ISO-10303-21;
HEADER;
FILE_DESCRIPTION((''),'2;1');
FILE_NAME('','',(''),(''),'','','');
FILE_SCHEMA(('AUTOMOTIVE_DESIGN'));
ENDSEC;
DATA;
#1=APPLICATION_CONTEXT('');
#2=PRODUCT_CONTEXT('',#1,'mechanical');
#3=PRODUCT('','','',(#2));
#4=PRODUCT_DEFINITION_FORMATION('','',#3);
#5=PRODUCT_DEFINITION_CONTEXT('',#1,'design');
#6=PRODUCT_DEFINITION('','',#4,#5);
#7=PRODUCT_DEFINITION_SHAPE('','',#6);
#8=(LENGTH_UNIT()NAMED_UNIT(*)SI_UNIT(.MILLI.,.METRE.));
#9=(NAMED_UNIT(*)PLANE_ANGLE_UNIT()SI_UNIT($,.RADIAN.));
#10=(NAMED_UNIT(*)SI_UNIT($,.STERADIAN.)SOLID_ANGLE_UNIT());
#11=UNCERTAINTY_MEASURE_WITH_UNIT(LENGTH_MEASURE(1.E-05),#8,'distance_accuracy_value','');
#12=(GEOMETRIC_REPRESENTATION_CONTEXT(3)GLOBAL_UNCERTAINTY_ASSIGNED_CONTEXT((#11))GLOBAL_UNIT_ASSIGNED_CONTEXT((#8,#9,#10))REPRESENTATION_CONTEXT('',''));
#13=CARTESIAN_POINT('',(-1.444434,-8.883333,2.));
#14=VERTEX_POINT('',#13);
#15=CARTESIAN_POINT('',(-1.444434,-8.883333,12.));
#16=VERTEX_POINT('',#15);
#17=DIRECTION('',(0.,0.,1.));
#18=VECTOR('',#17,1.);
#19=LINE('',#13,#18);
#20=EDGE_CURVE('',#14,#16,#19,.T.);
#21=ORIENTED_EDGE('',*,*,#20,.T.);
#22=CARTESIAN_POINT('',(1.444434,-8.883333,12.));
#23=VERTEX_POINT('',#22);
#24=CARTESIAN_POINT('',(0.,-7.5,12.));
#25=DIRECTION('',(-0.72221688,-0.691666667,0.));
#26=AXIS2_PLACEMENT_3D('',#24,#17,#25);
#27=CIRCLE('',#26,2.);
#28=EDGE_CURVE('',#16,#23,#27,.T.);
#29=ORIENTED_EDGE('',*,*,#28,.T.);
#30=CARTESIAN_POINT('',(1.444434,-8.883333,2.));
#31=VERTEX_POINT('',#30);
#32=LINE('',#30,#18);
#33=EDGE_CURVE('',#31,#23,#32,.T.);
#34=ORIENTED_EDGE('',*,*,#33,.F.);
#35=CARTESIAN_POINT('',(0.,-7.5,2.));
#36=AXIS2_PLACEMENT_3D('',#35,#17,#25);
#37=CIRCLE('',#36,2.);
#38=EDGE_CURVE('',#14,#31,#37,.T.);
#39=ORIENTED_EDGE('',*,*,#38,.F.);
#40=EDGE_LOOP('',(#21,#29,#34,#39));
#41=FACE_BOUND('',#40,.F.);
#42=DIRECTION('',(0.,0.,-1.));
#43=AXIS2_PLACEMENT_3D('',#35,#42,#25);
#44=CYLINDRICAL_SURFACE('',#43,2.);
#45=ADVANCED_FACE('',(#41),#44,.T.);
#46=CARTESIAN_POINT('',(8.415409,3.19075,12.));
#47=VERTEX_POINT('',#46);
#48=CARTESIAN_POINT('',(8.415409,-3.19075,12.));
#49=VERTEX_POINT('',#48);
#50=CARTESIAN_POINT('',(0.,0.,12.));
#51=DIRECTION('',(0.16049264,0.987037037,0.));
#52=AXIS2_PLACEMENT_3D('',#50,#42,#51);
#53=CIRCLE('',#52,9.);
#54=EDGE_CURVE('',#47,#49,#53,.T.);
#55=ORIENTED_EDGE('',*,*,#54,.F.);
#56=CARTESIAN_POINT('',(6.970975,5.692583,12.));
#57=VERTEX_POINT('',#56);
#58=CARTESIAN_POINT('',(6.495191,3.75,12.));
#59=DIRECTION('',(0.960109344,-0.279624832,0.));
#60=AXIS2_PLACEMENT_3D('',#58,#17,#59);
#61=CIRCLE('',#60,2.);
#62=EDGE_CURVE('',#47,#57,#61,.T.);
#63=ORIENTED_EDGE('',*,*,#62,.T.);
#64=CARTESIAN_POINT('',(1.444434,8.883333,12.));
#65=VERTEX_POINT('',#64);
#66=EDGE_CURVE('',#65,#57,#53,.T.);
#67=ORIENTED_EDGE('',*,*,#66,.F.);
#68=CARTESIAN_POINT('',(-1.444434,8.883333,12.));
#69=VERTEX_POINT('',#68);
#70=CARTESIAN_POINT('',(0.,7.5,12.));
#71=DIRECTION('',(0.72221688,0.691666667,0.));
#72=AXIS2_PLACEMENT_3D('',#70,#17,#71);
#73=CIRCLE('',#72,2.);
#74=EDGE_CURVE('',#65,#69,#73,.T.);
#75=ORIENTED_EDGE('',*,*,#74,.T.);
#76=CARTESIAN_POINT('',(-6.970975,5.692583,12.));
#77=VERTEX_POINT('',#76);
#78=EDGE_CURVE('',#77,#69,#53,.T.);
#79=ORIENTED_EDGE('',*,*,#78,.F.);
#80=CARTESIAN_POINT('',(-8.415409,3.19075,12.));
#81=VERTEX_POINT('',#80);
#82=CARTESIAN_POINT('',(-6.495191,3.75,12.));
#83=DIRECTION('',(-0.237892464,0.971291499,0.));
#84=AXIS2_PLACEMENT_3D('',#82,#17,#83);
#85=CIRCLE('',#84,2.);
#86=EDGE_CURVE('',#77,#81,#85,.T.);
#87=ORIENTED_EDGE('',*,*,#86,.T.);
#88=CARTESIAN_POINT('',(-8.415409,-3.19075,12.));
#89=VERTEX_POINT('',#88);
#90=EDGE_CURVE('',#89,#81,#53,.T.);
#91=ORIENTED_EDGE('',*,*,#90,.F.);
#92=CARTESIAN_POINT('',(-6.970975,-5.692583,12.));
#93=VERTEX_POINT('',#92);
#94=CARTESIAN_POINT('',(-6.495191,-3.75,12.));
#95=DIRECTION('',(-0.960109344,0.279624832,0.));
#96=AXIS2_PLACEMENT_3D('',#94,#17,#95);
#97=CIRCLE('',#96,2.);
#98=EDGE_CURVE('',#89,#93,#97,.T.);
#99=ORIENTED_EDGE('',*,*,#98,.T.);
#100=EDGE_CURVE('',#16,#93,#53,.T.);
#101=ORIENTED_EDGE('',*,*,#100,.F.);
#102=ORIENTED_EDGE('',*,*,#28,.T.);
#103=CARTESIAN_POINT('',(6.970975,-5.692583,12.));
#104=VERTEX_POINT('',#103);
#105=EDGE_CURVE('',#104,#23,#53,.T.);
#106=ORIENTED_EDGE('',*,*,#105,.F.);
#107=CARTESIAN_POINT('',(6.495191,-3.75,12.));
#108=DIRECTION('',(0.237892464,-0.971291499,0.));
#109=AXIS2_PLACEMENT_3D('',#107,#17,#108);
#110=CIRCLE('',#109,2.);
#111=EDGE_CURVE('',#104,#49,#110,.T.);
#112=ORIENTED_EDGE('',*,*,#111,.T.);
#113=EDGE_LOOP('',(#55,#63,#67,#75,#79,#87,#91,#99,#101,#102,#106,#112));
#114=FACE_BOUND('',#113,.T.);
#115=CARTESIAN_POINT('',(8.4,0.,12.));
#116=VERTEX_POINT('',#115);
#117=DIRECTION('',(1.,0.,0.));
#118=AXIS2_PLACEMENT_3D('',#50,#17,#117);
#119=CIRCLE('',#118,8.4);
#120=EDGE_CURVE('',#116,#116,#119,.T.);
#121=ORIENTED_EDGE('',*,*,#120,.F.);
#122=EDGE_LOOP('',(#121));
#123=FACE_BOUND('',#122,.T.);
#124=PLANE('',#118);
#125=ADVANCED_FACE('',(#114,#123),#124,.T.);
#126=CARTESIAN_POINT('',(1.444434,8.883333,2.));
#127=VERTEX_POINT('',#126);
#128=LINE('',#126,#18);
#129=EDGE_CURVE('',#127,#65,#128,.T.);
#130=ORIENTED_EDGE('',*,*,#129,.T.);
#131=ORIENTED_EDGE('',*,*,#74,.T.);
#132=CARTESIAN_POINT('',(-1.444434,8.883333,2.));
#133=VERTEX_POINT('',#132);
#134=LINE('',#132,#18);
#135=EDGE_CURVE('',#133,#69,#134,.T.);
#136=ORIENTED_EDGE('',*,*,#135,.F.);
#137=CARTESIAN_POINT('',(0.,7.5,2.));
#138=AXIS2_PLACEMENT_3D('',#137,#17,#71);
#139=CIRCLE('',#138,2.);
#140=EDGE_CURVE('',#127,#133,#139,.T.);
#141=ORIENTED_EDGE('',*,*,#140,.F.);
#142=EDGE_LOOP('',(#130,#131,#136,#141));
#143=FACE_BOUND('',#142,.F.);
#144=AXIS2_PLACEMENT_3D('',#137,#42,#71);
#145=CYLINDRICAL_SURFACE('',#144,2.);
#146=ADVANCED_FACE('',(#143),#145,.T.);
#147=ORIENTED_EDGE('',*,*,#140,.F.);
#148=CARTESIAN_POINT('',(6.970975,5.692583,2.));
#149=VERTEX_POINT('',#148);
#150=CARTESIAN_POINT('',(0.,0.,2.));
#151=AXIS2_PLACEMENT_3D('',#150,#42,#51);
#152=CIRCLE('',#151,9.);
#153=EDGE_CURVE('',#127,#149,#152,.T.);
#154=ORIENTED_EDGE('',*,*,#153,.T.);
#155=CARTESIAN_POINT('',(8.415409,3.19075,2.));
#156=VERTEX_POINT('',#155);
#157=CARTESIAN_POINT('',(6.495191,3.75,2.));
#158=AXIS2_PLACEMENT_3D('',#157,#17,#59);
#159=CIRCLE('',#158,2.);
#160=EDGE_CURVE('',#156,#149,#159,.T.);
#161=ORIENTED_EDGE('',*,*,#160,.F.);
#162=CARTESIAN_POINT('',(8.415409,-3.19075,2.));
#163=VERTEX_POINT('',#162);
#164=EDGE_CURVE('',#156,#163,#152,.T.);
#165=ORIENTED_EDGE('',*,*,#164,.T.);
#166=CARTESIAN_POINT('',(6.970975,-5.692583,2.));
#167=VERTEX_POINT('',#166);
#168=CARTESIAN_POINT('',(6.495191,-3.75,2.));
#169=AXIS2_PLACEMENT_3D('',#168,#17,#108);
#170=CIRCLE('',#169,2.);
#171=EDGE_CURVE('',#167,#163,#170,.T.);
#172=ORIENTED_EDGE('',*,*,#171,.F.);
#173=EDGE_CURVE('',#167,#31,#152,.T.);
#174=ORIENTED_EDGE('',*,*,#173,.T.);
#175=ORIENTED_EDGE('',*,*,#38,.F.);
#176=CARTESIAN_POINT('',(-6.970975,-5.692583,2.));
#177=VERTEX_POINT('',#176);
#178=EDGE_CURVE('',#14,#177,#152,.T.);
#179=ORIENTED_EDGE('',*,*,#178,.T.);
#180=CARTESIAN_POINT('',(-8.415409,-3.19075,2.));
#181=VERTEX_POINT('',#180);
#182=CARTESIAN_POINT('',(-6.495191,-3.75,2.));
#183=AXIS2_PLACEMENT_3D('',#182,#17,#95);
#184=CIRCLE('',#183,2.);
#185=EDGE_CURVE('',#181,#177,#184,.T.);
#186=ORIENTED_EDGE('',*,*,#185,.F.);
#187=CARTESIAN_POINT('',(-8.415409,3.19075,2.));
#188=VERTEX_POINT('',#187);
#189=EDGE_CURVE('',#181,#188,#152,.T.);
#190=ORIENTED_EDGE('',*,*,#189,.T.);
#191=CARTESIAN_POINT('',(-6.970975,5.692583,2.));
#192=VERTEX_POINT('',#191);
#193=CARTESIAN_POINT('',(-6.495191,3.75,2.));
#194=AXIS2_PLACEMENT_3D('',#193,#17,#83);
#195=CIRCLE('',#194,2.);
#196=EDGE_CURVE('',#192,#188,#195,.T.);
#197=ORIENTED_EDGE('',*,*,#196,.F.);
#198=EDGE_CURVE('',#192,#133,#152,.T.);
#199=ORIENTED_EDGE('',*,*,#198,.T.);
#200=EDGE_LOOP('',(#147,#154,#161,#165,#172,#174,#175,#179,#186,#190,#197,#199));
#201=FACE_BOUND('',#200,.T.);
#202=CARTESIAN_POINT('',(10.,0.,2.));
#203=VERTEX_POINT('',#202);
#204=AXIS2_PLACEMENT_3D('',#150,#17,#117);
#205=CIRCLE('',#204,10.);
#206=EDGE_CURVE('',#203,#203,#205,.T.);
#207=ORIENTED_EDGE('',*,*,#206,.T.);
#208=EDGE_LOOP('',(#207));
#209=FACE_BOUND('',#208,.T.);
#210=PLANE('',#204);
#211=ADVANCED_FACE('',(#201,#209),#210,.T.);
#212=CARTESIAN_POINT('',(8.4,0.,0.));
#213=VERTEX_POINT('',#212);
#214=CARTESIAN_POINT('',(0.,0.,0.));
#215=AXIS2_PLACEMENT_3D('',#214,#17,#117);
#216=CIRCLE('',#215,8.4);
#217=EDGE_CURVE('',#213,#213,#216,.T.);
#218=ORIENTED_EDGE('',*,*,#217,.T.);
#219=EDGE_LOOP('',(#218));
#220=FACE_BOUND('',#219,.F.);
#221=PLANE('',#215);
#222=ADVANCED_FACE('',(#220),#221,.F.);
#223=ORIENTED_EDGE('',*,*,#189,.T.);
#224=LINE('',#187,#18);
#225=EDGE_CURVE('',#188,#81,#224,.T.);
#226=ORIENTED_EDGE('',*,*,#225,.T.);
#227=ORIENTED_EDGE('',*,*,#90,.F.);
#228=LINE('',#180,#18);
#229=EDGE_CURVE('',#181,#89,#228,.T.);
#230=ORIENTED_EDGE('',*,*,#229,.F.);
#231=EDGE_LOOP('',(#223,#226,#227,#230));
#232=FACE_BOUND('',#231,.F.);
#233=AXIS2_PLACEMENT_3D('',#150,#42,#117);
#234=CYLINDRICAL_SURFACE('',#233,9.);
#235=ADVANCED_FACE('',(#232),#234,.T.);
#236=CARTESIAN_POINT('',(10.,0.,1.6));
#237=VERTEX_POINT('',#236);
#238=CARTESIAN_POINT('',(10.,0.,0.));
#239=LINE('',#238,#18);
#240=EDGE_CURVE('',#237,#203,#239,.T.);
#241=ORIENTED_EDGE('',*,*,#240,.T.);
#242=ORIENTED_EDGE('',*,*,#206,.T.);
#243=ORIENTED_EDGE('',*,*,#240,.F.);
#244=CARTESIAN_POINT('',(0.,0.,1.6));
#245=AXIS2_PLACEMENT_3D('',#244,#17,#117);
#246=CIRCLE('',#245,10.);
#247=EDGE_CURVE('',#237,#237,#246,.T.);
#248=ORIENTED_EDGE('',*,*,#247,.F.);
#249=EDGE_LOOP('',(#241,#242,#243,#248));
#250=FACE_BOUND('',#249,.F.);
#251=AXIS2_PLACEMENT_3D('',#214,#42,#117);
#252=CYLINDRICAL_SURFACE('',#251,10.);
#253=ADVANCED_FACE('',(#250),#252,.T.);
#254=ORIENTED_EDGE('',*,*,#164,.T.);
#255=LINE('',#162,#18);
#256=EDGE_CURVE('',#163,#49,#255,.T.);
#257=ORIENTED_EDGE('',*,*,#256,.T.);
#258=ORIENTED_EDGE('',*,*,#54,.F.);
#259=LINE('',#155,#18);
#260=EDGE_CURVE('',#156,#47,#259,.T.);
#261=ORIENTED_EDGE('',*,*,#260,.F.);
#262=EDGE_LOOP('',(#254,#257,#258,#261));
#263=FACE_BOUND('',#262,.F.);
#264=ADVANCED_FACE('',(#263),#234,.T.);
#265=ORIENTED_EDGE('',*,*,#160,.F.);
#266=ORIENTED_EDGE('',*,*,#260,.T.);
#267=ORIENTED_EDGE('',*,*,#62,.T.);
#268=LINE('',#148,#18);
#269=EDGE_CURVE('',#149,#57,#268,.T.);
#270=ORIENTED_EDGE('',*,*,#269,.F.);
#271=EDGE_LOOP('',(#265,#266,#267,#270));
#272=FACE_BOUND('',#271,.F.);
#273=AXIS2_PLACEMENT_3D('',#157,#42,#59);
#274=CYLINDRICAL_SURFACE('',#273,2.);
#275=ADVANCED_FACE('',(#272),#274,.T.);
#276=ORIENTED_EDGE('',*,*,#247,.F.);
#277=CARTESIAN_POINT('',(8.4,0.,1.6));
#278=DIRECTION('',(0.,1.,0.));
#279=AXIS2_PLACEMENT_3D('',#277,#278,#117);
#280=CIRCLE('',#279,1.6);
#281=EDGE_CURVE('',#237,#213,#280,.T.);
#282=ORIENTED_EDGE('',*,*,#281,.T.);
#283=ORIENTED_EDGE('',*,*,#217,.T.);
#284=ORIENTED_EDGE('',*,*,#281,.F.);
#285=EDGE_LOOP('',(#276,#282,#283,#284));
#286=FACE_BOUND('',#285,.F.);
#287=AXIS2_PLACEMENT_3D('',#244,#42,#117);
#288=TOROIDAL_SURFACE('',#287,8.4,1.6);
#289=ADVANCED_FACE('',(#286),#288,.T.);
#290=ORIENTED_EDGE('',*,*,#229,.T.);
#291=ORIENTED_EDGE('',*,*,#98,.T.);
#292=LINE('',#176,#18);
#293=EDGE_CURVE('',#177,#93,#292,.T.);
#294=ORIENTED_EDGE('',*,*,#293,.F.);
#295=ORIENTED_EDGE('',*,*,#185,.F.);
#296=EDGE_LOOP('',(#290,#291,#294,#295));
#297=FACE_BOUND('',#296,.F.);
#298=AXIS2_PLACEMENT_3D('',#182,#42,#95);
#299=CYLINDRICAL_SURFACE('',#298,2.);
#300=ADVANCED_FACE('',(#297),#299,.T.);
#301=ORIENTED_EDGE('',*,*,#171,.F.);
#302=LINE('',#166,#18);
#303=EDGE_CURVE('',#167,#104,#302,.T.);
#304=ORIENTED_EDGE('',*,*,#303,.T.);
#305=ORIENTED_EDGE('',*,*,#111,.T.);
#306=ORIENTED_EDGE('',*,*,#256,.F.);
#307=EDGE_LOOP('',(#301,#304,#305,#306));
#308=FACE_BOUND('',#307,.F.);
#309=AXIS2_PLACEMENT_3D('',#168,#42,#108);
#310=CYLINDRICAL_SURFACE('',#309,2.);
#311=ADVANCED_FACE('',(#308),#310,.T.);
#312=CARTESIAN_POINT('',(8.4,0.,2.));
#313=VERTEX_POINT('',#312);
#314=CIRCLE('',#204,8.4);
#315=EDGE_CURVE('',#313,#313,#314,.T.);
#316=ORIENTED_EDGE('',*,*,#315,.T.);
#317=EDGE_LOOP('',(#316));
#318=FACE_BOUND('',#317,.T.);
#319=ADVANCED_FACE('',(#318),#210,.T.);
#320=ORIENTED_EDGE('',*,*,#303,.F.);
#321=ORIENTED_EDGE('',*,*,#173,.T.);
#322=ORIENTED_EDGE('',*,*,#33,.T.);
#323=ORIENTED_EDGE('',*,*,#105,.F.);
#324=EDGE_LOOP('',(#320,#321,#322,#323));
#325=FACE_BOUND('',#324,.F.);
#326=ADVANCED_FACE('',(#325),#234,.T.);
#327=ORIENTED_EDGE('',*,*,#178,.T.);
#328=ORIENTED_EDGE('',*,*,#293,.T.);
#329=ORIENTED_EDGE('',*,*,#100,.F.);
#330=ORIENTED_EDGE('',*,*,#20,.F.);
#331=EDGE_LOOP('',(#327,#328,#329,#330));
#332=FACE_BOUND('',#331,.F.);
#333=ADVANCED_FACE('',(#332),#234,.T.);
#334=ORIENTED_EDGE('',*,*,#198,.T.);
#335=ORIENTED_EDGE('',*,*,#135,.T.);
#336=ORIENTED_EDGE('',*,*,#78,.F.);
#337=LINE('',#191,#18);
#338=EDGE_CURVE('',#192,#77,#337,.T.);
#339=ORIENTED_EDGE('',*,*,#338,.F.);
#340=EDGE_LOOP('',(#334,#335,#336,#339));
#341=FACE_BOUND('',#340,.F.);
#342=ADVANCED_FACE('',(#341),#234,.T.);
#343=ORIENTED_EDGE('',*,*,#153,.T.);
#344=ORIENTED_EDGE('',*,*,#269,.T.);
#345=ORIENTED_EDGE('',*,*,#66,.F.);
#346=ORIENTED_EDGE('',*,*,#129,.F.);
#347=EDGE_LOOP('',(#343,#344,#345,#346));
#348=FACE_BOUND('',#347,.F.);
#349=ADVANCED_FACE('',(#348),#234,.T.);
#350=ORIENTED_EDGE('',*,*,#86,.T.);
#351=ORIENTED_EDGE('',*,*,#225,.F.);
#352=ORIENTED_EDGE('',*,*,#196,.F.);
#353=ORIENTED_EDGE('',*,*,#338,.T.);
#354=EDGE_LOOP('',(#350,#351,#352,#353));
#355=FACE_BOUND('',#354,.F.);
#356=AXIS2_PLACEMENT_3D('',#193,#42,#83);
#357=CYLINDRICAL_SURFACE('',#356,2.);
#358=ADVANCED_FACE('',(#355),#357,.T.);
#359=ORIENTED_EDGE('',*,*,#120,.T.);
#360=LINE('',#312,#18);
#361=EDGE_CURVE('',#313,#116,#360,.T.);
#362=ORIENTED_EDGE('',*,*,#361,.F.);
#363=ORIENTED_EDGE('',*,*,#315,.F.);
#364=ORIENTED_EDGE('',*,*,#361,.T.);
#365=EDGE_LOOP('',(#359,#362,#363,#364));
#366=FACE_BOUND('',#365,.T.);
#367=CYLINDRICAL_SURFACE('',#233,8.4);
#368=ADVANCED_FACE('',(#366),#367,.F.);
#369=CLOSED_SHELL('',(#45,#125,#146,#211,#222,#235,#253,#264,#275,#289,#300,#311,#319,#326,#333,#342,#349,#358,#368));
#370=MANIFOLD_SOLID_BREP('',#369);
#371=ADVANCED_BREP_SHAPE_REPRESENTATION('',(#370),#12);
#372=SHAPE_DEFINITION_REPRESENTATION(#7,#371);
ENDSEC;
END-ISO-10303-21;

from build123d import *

# Parameters (mm, degrees)
F0_R            = 10
F1_DEPTH        = 2
F2_R            = 1.6
F4_R            = 9
F4_R_2          = 8.4
F5_DEPTH        = 10
F7_DEPTH        = 10
F7_COPIES_COUNT = 6


# Not quite as in the source:
# - a pattern or mirror of a feature is missing from the dataset's text; its kind, count and spacing are read off the source's solid


with BuildPart() as f1:
    # F0 (on Top) → F1 (new body)
    with BuildSketch(Plane.XY):
        Circle(F0_R)
    extrude(amount=F1_DEPTH)

    # F2
    f2_edges = [f1.edges().sort_by_distance(p)[0] for p in [
        (-10, 0, 0),
    ]]
    fillet(f2_edges, radius=F2_R)

    # F4 (on face) → F5 (join)
    with BuildSketch(Plane.XY.offset(2)):
        Circle(F4_R)
        Circle(F4_R_2, mode=Mode.SUBTRACT)
    extrude(amount=F5_DEPTH)

    # F6 (on face) → F7 (join, through all)
    with BuildSketch(Plane.XY.offset(2)):
        with BuildLine():
            ThreePointArc((-1.4444337606, 8.8833333333), (0, 9), (1.4444337606, 8.8833333333))
            ThreePointArc((1.4444337606, 8.8833333333), (0, 9.5), (-1.4444337606, 8.8833333333))
        make_face()
    f7 = extrude(amount=F7_DEPTH)

    # F7_copies: F7 ×6 about axis
    f7_copies_axis = Axis((0, 0, 0), (0, 0, 1))
    for i in range(1, F7_COPIES_COUNT):
        add(f7.rotate(f7_copies_axis, i * 360 / F7_COPIES_COUNT))


solid = f1.part
